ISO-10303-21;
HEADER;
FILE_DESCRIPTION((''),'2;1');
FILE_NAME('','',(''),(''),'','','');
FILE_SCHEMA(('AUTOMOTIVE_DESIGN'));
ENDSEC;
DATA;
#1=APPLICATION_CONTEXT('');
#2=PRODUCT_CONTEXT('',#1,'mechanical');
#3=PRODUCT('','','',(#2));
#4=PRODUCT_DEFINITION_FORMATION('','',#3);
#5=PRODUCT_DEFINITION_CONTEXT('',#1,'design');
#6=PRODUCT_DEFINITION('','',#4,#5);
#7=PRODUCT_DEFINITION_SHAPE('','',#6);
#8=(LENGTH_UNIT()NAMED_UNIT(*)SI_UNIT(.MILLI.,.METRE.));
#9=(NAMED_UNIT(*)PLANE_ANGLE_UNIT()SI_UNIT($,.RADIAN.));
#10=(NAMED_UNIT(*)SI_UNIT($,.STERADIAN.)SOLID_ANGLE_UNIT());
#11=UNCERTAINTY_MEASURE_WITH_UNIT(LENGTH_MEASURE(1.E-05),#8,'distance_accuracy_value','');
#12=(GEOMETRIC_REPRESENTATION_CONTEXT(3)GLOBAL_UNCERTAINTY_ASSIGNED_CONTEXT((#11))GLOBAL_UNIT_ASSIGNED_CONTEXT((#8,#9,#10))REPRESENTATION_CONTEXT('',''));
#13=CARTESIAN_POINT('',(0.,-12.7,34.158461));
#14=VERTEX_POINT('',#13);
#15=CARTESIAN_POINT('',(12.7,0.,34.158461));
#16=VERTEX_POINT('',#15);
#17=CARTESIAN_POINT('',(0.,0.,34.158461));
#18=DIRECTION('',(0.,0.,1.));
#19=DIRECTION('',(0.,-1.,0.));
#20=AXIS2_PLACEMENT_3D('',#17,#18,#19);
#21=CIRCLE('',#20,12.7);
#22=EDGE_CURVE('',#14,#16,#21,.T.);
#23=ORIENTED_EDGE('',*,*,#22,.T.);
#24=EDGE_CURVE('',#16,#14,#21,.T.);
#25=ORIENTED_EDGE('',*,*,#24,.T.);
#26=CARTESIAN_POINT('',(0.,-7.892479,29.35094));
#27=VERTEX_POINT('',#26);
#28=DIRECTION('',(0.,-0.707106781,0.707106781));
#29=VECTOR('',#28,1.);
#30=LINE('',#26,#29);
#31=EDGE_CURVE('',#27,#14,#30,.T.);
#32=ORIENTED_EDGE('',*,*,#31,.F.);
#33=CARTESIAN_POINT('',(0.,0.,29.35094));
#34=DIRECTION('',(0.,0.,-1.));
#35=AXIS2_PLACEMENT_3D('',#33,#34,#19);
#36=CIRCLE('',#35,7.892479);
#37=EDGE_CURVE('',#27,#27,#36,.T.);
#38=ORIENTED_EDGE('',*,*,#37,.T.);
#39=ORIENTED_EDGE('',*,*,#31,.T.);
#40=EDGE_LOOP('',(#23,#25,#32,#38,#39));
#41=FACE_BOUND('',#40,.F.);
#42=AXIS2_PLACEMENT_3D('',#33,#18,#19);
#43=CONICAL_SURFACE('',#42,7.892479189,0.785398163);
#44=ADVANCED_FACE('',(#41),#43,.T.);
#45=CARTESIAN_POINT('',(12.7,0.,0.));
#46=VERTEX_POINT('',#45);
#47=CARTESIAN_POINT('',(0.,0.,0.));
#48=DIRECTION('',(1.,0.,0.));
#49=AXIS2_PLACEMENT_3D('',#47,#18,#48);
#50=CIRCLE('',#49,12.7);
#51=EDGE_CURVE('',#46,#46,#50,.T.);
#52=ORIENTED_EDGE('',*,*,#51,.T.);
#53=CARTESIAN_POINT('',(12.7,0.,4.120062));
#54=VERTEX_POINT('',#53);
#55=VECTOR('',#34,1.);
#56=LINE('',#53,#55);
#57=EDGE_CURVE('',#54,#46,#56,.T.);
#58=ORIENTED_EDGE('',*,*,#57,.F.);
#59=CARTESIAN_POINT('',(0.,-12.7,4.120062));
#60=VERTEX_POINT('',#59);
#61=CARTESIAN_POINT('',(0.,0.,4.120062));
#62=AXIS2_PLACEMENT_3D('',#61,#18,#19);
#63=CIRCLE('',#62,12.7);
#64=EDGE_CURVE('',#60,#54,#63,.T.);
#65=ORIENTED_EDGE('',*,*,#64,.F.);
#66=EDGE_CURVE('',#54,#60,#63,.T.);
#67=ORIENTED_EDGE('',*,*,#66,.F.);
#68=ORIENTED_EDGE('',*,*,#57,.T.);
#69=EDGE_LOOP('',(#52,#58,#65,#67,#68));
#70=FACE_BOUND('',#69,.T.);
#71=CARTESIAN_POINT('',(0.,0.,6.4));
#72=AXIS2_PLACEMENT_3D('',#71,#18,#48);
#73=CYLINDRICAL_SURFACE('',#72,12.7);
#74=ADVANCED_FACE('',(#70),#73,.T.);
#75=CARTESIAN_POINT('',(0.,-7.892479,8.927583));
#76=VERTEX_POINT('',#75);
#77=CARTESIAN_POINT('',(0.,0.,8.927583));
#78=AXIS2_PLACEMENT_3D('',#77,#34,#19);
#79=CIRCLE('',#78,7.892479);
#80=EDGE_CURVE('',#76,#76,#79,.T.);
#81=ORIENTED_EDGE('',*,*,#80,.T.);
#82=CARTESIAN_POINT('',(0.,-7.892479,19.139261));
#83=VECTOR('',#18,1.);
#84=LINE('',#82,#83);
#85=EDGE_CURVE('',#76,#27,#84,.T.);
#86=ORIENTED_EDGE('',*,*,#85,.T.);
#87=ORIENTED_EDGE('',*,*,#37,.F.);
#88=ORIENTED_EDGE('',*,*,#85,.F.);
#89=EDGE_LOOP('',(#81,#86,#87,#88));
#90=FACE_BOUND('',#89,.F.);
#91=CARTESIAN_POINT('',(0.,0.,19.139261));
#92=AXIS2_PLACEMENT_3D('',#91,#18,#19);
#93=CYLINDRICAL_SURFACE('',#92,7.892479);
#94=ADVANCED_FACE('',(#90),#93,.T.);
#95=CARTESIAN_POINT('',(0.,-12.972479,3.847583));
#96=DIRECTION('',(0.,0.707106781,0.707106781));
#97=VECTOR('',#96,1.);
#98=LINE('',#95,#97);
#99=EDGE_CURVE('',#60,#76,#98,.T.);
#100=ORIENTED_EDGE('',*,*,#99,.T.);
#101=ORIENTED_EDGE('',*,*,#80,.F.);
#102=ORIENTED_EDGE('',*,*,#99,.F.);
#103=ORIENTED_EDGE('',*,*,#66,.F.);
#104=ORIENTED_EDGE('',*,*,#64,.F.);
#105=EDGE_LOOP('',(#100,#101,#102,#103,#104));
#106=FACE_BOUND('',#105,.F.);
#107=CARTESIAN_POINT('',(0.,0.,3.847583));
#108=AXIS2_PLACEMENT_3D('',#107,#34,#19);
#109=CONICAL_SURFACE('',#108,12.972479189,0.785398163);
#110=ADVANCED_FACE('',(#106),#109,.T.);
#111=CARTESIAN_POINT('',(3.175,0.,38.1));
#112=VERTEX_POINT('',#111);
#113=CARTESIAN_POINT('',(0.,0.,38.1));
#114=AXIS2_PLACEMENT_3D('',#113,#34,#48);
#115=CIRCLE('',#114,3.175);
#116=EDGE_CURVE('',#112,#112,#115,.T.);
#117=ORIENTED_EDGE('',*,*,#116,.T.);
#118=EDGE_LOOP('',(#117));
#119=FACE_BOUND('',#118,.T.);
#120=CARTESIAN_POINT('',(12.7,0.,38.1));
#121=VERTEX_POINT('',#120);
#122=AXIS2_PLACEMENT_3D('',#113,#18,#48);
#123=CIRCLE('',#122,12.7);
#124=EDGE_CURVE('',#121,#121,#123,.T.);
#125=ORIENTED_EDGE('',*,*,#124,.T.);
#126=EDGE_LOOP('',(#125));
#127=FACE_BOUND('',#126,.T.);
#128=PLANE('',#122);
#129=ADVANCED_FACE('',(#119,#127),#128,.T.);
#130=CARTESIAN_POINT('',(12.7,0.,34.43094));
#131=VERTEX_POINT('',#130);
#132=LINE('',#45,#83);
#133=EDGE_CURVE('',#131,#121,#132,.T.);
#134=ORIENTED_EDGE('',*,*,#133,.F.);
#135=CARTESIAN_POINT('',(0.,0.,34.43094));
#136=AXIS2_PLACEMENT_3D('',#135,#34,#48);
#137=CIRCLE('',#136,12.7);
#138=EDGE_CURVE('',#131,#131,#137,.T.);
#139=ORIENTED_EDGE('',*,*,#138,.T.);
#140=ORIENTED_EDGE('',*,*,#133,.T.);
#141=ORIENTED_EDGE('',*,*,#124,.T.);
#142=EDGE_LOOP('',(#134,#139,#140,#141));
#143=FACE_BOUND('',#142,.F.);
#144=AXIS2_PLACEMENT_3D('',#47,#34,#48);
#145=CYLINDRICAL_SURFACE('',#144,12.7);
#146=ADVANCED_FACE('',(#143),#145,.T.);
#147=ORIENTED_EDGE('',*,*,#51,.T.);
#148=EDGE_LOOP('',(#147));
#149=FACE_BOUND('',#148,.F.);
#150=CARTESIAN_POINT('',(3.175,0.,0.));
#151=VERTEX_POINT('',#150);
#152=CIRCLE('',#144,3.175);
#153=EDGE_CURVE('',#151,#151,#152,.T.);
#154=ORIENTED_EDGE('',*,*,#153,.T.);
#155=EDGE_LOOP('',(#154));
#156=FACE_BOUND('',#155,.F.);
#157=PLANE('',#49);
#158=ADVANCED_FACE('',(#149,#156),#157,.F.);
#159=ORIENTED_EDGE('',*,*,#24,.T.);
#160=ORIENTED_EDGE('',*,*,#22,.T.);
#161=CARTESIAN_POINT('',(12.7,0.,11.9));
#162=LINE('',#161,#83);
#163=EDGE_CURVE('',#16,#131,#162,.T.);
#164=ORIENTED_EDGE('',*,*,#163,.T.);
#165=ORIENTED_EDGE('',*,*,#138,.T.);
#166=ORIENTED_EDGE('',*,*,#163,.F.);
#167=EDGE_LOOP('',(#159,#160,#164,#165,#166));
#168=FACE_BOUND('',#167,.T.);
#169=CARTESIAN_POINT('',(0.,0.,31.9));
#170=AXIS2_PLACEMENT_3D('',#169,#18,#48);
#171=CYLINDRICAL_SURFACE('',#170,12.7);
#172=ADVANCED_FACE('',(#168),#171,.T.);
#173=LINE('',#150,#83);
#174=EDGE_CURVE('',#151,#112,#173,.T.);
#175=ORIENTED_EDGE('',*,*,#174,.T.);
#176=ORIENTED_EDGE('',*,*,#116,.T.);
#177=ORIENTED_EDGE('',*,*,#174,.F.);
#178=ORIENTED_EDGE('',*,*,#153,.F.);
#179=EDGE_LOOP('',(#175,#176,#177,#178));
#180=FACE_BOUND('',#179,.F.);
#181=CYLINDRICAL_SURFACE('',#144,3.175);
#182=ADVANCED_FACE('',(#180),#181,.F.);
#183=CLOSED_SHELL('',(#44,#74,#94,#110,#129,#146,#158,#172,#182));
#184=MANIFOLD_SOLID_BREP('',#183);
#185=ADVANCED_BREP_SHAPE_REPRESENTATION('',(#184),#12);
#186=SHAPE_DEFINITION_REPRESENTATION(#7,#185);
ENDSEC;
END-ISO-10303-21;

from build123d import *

# Parameters (mm, degrees)
F0_R         = 12.7
F1_DEPTH     = 38.1
F2_W         = 10.2602215484
F2_H         = 30.5833565071
F4_R         = 3.175
F5_DEPTH     = 50.8
F6_S5_R      = 12.7
F6_T6_DEPTH  = 20
F6_S11_R     = 12.7
F6_T12_DEPTH = 20


# Not quite as in the source:
# - a fillet or chamfer that OpenCascade refuses, or shapes differently, is made with other operations: its cross-section is extruded or revolved along the edge and cut away or added


with BuildPart() as f1:
    # F0 (on Top) → F1 (new body)
    with BuildSketch(Plane.XY):
        Circle(F0_R)
    extrude(amount=F1_DEPTH)

    # F2 (on Right) → F3 (revolve, cut)
    with BuildSketch(Plane.YZ):
        with Locations((-13.0225899629, 19.1392614506)):
            Rectangle(F2_W, F2_H)
    revolve(axis=Axis((0, 0, 18.941948656), (0, 0, -1)), mode=Mode.SUBTRACT)

    # F4 (on face) → F5 (cut)
    with BuildSketch(Plane(origin=(0, 0, 0), x_dir=(1, 0, 0), z_dir=(0, 0, -1))):
        Circle(F4_R)
    extrude(amount=-F5_DEPTH, mode=Mode.SUBTRACT)

    # F6: chamfer of 5.08 on 2 edges, made by hand


with BuildPart() as f6_tool2:
    # F6_s3 → F6_t4 (revolve)
    with BuildSketch(Plane.YZ):
        Polygon((-12.9724791887, 3.8475831971), (-7.8924791887, 8.9275831971), (-7.8924791887, 3.8475831971), align=None)
    revolve(axis=Axis((0, 0, 3.8475831971), (0, 0, -1)))

    # F6_s5 → F6_t6 (intersect, symmetric)
    with BuildSketch(Plane.XY.offset(6.4)):
        Circle(F6_S5_R)
    extrude(amount=F6_T6_DEPTH, both=True, mode=Mode.INTERSECT)


with BuildPart() as f1_1:
    add(f1.part)

    # F6_t1: union F6_tool2
    add(f6_tool2.part)


with BuildPart() as f6_tool8:
    # F6_s9 → F6_t10 (revolve)
    with BuildSketch(Plane.YZ):
        Polygon((-7.8924791887, 29.3509397042), (-12.9724791887, 34.4309397042), (-7.8924791887, 34.4309397042), align=None)
    revolve(axis=Axis((0, 0, 34.4309397042), (0, 0, -1)))

    # F6_s11 → F6_t12 (intersect, symmetric)
    with BuildSketch(Plane.XY.offset(31.9)):
        Circle(F6_S11_R)
    extrude(amount=F6_T12_DEPTH, both=True, mode=Mode.INTERSECT)


with BuildPart() as f1_2:
    add(f1_1.part)

    # F6_t7: union F6_tool8
    add(f6_tool8.part)


solid = f1_2.part
